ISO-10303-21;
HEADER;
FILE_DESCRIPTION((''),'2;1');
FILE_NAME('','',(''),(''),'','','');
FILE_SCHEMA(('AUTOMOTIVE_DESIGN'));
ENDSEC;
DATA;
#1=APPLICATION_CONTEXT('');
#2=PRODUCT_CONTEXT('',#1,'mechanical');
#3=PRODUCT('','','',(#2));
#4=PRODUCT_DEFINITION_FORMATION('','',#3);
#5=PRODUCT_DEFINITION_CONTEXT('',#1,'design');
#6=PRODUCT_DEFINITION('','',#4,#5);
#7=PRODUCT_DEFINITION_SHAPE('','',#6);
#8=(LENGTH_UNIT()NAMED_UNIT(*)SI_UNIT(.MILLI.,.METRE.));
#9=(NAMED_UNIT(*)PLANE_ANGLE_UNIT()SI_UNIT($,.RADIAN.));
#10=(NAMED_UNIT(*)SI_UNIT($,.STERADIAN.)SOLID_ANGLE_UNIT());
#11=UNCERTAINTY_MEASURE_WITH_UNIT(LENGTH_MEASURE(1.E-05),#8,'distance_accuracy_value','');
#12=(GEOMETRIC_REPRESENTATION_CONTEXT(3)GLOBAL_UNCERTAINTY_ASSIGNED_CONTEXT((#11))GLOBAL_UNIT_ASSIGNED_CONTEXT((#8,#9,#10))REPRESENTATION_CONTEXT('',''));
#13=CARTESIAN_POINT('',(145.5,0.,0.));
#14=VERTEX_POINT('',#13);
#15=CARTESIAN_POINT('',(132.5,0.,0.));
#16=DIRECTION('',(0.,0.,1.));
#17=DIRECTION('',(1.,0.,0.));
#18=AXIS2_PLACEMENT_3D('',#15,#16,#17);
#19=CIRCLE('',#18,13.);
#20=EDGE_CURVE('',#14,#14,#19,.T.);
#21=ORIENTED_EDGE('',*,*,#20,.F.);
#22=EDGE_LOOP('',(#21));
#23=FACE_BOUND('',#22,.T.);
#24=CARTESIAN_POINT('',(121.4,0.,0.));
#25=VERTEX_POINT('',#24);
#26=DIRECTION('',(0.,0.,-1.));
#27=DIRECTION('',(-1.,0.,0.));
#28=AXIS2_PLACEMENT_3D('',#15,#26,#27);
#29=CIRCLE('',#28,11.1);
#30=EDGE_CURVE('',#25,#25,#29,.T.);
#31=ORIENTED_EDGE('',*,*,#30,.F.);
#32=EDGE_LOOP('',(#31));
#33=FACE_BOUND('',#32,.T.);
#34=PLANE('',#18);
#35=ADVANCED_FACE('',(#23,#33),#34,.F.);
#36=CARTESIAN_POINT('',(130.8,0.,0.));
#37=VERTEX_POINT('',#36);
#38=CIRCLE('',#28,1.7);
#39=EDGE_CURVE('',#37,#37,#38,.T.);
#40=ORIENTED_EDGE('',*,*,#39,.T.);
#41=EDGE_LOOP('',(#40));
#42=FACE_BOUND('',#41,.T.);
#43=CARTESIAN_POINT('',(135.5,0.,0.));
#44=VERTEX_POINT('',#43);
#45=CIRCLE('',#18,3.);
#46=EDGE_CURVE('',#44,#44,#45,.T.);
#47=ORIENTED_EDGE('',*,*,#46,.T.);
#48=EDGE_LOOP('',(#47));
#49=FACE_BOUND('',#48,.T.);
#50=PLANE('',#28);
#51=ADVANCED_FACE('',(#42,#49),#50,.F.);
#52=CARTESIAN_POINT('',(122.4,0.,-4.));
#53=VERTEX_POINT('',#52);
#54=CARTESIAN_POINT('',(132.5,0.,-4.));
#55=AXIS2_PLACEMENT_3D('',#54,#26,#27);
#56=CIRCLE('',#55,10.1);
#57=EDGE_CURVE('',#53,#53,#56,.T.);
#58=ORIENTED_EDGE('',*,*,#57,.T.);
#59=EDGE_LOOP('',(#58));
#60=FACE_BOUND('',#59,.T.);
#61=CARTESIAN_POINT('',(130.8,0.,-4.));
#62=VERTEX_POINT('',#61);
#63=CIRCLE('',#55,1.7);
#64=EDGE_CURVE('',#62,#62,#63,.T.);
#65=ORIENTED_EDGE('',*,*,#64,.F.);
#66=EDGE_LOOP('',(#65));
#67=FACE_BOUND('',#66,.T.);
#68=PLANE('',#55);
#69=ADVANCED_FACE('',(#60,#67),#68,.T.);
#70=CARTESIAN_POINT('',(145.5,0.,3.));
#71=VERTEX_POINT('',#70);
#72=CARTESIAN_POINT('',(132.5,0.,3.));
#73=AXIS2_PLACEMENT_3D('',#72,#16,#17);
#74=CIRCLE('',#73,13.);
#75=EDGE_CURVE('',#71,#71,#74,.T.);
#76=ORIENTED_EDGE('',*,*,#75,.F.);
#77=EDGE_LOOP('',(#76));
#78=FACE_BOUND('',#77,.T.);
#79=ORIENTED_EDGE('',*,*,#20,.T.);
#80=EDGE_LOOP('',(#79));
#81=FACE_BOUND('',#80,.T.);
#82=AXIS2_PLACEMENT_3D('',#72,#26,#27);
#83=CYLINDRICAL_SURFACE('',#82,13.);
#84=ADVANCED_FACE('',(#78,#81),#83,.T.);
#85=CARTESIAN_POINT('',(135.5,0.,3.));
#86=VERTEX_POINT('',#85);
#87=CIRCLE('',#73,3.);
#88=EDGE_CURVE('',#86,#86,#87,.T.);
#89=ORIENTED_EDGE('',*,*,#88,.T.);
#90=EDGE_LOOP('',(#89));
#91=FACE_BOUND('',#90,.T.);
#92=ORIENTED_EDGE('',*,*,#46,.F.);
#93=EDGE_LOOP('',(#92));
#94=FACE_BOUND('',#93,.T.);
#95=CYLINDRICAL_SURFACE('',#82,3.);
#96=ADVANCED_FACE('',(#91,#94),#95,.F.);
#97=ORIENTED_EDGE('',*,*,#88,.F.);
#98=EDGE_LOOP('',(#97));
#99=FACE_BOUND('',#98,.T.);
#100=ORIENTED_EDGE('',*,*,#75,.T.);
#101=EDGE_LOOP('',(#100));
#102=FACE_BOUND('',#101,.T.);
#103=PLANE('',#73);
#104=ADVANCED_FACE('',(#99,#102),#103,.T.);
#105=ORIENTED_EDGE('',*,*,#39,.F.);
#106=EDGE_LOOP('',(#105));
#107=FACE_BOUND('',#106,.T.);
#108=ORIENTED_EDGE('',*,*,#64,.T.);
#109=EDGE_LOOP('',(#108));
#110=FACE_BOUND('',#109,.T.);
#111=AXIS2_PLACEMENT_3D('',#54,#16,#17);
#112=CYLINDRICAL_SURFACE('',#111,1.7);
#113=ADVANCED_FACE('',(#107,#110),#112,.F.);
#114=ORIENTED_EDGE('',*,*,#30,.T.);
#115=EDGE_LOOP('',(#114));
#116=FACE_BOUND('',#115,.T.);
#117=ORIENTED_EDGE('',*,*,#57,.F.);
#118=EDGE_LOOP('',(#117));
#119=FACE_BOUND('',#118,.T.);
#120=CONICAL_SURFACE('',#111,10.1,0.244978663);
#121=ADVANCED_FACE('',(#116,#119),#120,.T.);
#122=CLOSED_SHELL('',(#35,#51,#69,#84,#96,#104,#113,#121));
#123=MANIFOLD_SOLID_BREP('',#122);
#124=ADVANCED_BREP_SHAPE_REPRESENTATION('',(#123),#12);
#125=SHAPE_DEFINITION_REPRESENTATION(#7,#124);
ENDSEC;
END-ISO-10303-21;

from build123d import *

# Parameters (mm, degrees)
SKETCH1_R           = 13
SKETCH1_R_2         = 3
BOSS_EXTRUDE1_DEPTH = 3
SKETCH2_R           = 11.1
SKETCH2_R_2         = 1.7
BOSS_EXTRUDE2_DEPTH = 4
CHAMFER1_SIZE       = 4
CHAMFER1_SIZE_2     = 1


with BuildPart() as part:
    # Sketch1 → Boss-Extrude1 (new body)
    with BuildSketch(Plane.XY):
        with Locations((132.499999994, -1e-09)):
            Circle(SKETCH1_R)
        with Locations((132.499999994, -1e-09)):
            Circle(SKETCH1_R_2, mode=Mode.SUBTRACT)
    extrude(amount=BOSS_EXTRUDE1_DEPTH)

    # Sketch2 → Boss-Extrude2 (add)
    with BuildSketch(Plane(origin=(0, 0, 0), x_dir=(-1, 0, 0), z_dir=(0, 0, -1))):
        with Locations((-132.5, 0)):
            Circle(SKETCH2_R)
        with Locations((-132.5, 0)):
            Circle(SKETCH2_R_2, mode=Mode.SUBTRACT)
    extrude(amount=BOSS_EXTRUDE2_DEPTH)

    # Chamfer1
    # the kernel refuses this chamfer: 4, 1 mm, written as the material it takes off along each edge
    with BuildSketch(Plane(origin=(132.5, 0, -4), x_dir=(-1, 0, 0), z_dir=(0, -1, 0))) as chamfer1_piece_1_section:
        Polygon((11.1, -CHAMFER1_SIZE), (11.1 - CHAMFER1_SIZE_2, 0), (11.1, 0), align=None)
    chamfer1_piece_1 = revolve(axis=Axis((132.5, 0, -4), (0, 0, -1)), mode=Mode.PRIVATE)
    chamfer1_piece_1 = split(chamfer1_piece_1, bisect_by=Plane(origin=(132.5, 0, 0), z_dir=(0, 0, -1)), keep=Keep.TOP, mode=Mode.PRIVATE)
    add(chamfer1_piece_1, mode=Mode.SUBTRACT)


solid = part.part
